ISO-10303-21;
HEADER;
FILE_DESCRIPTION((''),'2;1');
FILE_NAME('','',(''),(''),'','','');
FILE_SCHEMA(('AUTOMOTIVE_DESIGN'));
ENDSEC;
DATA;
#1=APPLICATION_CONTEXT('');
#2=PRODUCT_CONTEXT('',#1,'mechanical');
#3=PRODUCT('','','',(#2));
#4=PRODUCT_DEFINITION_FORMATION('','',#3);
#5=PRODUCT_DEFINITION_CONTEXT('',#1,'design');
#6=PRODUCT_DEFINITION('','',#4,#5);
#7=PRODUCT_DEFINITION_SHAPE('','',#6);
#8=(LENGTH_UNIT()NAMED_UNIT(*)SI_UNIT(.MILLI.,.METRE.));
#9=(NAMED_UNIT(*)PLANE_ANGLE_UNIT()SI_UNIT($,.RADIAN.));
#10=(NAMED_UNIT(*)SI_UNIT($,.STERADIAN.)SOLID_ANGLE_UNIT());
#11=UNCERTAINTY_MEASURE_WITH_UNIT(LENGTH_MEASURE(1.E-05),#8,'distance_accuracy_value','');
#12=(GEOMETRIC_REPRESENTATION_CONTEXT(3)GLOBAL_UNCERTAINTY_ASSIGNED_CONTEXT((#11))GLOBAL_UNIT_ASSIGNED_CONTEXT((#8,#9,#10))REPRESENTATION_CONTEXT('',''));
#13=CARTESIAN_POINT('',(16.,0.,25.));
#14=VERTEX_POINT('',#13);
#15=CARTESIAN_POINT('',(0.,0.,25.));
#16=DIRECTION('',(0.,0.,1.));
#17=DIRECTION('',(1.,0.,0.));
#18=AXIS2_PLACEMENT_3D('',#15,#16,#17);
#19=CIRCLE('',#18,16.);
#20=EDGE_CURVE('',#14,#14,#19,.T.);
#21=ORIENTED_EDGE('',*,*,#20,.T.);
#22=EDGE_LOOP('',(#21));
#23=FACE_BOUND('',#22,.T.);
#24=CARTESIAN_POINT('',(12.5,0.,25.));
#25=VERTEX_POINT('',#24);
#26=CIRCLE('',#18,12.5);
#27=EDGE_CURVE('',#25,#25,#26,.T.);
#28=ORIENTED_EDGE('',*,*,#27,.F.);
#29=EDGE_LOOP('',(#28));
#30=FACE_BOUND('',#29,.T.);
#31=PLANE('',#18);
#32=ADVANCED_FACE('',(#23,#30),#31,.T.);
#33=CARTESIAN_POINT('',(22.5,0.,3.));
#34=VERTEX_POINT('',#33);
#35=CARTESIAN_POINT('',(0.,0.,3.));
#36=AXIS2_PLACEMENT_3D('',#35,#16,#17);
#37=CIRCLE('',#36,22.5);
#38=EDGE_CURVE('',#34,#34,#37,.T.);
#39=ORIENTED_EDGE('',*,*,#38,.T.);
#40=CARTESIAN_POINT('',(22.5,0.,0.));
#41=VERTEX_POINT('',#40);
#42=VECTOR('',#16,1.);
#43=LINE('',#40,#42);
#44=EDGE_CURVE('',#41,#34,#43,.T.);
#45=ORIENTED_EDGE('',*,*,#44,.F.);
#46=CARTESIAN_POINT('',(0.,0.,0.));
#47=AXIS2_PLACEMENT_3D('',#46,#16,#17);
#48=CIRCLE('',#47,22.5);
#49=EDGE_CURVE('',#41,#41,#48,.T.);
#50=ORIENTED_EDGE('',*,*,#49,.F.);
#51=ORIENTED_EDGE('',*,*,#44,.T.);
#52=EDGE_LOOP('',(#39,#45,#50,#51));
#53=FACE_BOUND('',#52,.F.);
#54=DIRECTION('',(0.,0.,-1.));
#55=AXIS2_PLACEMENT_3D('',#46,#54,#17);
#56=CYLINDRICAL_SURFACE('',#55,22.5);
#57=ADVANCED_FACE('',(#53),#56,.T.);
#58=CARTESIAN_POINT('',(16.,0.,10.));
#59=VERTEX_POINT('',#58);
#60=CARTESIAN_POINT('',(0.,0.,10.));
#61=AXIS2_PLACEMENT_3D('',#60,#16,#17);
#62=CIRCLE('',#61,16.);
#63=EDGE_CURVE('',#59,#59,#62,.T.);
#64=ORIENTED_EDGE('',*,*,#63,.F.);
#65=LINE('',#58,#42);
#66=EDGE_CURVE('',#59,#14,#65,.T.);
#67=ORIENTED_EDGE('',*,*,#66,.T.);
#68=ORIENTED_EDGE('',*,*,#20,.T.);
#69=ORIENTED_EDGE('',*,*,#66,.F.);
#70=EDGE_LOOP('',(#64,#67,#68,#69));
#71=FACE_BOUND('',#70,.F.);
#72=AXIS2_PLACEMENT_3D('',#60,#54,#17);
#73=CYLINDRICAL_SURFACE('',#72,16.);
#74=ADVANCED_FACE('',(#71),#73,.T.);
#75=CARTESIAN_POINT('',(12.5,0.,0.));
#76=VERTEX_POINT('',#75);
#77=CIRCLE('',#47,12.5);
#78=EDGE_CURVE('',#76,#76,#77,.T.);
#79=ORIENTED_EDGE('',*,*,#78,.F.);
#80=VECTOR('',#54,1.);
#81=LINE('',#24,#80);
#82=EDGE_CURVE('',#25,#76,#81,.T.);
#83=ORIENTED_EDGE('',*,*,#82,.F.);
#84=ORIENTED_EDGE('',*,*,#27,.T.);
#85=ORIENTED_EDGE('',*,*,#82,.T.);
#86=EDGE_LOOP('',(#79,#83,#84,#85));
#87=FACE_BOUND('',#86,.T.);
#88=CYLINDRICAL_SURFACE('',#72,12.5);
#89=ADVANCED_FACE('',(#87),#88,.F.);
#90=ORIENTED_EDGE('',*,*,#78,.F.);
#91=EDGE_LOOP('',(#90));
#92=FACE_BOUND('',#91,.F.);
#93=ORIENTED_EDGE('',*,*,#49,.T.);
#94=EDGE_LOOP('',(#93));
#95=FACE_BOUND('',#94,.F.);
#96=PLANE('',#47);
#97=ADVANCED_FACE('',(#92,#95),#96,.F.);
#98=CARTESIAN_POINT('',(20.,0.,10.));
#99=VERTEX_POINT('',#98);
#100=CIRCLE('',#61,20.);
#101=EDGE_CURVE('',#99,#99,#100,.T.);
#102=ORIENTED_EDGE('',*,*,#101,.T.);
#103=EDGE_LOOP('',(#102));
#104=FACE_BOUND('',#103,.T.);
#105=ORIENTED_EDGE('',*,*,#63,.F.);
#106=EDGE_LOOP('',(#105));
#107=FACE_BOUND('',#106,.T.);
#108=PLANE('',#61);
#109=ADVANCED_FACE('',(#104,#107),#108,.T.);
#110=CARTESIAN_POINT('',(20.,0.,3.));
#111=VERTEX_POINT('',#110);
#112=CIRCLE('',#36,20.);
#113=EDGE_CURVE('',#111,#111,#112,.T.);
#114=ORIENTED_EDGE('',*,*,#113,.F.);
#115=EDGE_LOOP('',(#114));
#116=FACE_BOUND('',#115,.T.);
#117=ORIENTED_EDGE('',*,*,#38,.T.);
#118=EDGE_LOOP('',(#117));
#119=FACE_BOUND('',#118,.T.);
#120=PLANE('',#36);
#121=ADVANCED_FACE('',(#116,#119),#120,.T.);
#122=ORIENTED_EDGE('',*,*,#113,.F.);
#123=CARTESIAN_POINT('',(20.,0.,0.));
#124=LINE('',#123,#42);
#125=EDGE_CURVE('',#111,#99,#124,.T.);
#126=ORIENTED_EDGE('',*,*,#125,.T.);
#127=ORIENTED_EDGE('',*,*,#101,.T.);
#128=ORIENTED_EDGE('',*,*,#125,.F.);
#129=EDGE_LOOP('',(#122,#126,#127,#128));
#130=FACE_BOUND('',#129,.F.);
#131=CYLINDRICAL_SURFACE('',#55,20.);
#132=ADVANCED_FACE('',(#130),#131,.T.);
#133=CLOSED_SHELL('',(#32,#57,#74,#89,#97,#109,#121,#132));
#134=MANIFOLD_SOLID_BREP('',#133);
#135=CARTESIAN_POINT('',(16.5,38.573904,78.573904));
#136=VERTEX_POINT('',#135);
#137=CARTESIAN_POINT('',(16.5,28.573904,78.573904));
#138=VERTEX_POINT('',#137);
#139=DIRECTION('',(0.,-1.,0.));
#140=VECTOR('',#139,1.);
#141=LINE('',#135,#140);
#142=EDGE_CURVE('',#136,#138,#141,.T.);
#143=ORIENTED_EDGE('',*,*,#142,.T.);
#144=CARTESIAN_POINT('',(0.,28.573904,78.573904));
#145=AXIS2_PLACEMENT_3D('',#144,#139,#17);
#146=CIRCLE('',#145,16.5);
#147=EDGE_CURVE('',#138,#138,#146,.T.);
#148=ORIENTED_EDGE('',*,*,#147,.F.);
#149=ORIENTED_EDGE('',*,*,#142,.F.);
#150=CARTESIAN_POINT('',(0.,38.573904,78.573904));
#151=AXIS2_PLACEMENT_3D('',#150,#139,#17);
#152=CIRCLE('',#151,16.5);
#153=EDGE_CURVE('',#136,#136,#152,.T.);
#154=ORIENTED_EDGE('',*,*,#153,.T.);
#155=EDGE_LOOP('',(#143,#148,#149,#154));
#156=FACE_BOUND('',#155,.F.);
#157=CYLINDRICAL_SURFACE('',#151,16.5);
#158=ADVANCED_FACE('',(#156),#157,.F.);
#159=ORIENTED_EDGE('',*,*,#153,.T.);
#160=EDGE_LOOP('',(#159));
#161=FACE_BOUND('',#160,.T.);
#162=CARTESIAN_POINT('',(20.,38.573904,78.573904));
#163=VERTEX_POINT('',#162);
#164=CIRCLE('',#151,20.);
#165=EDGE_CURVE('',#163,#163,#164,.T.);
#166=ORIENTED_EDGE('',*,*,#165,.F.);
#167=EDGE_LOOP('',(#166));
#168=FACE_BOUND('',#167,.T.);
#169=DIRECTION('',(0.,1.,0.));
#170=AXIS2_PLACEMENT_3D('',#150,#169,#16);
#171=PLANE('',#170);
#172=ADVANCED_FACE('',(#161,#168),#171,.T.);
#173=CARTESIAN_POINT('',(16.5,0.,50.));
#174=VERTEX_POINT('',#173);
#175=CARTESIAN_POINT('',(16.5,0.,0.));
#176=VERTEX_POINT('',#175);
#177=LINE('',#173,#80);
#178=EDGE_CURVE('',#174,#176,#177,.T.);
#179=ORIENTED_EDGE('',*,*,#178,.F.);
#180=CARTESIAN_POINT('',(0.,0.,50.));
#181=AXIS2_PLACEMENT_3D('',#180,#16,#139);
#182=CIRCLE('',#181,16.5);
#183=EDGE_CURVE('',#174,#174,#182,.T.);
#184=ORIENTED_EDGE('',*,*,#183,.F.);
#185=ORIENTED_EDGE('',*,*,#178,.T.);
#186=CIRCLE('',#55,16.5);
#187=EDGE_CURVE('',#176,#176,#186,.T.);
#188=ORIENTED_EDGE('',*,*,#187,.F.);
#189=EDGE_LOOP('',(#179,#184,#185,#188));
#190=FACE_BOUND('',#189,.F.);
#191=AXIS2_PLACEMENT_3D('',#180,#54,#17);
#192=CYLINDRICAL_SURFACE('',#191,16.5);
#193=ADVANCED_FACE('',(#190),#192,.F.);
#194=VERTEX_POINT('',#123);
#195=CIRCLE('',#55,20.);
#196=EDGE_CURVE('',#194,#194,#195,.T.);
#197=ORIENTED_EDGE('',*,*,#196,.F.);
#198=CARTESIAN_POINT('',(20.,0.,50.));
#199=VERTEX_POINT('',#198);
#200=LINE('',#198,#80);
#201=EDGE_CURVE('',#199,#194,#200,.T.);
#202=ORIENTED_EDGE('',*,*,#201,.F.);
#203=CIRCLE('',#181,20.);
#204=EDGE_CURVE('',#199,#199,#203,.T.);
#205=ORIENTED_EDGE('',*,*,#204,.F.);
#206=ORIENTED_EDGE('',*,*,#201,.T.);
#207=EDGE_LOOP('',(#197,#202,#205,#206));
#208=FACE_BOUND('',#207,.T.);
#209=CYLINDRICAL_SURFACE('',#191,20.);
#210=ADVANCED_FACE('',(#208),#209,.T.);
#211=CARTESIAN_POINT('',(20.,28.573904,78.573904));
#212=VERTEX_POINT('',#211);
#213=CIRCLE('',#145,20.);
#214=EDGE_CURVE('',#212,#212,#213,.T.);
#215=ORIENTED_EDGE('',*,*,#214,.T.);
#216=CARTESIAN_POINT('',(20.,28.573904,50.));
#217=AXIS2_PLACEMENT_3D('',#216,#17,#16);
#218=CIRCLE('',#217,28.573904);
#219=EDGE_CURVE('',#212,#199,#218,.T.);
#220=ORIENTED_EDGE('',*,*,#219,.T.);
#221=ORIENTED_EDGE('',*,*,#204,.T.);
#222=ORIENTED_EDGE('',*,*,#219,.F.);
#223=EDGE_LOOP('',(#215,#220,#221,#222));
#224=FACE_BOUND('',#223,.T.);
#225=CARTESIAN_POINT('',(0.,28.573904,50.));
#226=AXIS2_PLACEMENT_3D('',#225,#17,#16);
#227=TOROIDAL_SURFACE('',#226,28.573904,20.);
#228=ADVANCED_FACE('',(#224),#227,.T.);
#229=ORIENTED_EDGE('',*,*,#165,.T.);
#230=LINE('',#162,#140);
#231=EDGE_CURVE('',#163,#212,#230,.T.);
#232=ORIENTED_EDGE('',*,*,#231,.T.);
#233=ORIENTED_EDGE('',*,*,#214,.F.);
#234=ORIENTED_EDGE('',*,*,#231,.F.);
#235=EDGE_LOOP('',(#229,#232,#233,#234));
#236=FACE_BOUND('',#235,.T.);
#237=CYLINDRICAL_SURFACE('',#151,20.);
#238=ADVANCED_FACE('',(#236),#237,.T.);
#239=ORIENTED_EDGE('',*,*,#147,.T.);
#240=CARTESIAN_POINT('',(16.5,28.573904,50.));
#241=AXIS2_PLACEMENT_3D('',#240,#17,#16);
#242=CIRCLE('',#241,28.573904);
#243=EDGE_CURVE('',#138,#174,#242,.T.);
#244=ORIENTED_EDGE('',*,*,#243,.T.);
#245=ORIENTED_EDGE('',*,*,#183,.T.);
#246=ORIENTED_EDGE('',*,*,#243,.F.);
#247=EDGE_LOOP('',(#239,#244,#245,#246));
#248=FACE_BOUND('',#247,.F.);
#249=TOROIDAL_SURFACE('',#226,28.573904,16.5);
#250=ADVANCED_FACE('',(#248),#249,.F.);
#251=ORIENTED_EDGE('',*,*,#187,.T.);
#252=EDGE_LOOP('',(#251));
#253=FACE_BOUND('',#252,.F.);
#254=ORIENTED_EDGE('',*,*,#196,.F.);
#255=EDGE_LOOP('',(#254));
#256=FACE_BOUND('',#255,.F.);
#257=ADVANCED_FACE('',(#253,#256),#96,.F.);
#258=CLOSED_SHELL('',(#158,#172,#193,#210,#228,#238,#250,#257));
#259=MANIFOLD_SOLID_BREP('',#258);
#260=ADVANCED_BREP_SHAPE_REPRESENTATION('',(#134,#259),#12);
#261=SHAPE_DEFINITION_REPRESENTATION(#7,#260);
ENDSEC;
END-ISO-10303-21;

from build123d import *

# Parameters (mm, degrees)
F0_R     = 20
F0_R_2   = 16.5
F3_R     = 20
F3_R_2   = 12.5
F4_DEPTH = 10
F5_R     = 16
F5_R_2   = 12.5
F6_DEPTH = 15
F7_R     = 22.5
F7_R_2   = 20
F8_DEPTH = 3


with BuildPart() as f2:
    # F2: sweep along a path in F1
    with BuildLine(Plane.YZ) as f2_path:
        Line((38.5739039603, 78.5739039603), (28.5739039603, 78.5739039603))
        ThreePointArc((28.5739039603, 78.5739039603), (8.369102705, 70.2048012553), (0, 50))
        Line((0, 50), (0, 0))
    # F0 (on Top) → F2 (sweep)
    with BuildSketch(Plane.XY):
        Circle(F0_R)
        Circle(F0_R_2, mode=Mode.SUBTRACT)
    sweep(path=f2_path.line)


with BuildPart() as f4:
    # F3 (on Top) → F4 (new body)
    with BuildSketch(Plane.XY):
        Circle(F3_R)
        Circle(F3_R_2, mode=Mode.SUBTRACT)
    extrude(amount=F4_DEPTH)

    # F5 (on face) → F6 (join)
    with BuildSketch(Plane.XY.offset(10)):
        Circle(F5_R)
        Circle(F5_R_2, mode=Mode.SUBTRACT)
    extrude(amount=F6_DEPTH)

    # F7 (on Top) → F8 (join)
    with BuildSketch(Plane.XY):
        Circle(F7_R)
        Circle(F7_R_2, mode=Mode.SUBTRACT)
    extrude(amount=F8_DEPTH)


solid = Compound([f2.part, f4.part])
